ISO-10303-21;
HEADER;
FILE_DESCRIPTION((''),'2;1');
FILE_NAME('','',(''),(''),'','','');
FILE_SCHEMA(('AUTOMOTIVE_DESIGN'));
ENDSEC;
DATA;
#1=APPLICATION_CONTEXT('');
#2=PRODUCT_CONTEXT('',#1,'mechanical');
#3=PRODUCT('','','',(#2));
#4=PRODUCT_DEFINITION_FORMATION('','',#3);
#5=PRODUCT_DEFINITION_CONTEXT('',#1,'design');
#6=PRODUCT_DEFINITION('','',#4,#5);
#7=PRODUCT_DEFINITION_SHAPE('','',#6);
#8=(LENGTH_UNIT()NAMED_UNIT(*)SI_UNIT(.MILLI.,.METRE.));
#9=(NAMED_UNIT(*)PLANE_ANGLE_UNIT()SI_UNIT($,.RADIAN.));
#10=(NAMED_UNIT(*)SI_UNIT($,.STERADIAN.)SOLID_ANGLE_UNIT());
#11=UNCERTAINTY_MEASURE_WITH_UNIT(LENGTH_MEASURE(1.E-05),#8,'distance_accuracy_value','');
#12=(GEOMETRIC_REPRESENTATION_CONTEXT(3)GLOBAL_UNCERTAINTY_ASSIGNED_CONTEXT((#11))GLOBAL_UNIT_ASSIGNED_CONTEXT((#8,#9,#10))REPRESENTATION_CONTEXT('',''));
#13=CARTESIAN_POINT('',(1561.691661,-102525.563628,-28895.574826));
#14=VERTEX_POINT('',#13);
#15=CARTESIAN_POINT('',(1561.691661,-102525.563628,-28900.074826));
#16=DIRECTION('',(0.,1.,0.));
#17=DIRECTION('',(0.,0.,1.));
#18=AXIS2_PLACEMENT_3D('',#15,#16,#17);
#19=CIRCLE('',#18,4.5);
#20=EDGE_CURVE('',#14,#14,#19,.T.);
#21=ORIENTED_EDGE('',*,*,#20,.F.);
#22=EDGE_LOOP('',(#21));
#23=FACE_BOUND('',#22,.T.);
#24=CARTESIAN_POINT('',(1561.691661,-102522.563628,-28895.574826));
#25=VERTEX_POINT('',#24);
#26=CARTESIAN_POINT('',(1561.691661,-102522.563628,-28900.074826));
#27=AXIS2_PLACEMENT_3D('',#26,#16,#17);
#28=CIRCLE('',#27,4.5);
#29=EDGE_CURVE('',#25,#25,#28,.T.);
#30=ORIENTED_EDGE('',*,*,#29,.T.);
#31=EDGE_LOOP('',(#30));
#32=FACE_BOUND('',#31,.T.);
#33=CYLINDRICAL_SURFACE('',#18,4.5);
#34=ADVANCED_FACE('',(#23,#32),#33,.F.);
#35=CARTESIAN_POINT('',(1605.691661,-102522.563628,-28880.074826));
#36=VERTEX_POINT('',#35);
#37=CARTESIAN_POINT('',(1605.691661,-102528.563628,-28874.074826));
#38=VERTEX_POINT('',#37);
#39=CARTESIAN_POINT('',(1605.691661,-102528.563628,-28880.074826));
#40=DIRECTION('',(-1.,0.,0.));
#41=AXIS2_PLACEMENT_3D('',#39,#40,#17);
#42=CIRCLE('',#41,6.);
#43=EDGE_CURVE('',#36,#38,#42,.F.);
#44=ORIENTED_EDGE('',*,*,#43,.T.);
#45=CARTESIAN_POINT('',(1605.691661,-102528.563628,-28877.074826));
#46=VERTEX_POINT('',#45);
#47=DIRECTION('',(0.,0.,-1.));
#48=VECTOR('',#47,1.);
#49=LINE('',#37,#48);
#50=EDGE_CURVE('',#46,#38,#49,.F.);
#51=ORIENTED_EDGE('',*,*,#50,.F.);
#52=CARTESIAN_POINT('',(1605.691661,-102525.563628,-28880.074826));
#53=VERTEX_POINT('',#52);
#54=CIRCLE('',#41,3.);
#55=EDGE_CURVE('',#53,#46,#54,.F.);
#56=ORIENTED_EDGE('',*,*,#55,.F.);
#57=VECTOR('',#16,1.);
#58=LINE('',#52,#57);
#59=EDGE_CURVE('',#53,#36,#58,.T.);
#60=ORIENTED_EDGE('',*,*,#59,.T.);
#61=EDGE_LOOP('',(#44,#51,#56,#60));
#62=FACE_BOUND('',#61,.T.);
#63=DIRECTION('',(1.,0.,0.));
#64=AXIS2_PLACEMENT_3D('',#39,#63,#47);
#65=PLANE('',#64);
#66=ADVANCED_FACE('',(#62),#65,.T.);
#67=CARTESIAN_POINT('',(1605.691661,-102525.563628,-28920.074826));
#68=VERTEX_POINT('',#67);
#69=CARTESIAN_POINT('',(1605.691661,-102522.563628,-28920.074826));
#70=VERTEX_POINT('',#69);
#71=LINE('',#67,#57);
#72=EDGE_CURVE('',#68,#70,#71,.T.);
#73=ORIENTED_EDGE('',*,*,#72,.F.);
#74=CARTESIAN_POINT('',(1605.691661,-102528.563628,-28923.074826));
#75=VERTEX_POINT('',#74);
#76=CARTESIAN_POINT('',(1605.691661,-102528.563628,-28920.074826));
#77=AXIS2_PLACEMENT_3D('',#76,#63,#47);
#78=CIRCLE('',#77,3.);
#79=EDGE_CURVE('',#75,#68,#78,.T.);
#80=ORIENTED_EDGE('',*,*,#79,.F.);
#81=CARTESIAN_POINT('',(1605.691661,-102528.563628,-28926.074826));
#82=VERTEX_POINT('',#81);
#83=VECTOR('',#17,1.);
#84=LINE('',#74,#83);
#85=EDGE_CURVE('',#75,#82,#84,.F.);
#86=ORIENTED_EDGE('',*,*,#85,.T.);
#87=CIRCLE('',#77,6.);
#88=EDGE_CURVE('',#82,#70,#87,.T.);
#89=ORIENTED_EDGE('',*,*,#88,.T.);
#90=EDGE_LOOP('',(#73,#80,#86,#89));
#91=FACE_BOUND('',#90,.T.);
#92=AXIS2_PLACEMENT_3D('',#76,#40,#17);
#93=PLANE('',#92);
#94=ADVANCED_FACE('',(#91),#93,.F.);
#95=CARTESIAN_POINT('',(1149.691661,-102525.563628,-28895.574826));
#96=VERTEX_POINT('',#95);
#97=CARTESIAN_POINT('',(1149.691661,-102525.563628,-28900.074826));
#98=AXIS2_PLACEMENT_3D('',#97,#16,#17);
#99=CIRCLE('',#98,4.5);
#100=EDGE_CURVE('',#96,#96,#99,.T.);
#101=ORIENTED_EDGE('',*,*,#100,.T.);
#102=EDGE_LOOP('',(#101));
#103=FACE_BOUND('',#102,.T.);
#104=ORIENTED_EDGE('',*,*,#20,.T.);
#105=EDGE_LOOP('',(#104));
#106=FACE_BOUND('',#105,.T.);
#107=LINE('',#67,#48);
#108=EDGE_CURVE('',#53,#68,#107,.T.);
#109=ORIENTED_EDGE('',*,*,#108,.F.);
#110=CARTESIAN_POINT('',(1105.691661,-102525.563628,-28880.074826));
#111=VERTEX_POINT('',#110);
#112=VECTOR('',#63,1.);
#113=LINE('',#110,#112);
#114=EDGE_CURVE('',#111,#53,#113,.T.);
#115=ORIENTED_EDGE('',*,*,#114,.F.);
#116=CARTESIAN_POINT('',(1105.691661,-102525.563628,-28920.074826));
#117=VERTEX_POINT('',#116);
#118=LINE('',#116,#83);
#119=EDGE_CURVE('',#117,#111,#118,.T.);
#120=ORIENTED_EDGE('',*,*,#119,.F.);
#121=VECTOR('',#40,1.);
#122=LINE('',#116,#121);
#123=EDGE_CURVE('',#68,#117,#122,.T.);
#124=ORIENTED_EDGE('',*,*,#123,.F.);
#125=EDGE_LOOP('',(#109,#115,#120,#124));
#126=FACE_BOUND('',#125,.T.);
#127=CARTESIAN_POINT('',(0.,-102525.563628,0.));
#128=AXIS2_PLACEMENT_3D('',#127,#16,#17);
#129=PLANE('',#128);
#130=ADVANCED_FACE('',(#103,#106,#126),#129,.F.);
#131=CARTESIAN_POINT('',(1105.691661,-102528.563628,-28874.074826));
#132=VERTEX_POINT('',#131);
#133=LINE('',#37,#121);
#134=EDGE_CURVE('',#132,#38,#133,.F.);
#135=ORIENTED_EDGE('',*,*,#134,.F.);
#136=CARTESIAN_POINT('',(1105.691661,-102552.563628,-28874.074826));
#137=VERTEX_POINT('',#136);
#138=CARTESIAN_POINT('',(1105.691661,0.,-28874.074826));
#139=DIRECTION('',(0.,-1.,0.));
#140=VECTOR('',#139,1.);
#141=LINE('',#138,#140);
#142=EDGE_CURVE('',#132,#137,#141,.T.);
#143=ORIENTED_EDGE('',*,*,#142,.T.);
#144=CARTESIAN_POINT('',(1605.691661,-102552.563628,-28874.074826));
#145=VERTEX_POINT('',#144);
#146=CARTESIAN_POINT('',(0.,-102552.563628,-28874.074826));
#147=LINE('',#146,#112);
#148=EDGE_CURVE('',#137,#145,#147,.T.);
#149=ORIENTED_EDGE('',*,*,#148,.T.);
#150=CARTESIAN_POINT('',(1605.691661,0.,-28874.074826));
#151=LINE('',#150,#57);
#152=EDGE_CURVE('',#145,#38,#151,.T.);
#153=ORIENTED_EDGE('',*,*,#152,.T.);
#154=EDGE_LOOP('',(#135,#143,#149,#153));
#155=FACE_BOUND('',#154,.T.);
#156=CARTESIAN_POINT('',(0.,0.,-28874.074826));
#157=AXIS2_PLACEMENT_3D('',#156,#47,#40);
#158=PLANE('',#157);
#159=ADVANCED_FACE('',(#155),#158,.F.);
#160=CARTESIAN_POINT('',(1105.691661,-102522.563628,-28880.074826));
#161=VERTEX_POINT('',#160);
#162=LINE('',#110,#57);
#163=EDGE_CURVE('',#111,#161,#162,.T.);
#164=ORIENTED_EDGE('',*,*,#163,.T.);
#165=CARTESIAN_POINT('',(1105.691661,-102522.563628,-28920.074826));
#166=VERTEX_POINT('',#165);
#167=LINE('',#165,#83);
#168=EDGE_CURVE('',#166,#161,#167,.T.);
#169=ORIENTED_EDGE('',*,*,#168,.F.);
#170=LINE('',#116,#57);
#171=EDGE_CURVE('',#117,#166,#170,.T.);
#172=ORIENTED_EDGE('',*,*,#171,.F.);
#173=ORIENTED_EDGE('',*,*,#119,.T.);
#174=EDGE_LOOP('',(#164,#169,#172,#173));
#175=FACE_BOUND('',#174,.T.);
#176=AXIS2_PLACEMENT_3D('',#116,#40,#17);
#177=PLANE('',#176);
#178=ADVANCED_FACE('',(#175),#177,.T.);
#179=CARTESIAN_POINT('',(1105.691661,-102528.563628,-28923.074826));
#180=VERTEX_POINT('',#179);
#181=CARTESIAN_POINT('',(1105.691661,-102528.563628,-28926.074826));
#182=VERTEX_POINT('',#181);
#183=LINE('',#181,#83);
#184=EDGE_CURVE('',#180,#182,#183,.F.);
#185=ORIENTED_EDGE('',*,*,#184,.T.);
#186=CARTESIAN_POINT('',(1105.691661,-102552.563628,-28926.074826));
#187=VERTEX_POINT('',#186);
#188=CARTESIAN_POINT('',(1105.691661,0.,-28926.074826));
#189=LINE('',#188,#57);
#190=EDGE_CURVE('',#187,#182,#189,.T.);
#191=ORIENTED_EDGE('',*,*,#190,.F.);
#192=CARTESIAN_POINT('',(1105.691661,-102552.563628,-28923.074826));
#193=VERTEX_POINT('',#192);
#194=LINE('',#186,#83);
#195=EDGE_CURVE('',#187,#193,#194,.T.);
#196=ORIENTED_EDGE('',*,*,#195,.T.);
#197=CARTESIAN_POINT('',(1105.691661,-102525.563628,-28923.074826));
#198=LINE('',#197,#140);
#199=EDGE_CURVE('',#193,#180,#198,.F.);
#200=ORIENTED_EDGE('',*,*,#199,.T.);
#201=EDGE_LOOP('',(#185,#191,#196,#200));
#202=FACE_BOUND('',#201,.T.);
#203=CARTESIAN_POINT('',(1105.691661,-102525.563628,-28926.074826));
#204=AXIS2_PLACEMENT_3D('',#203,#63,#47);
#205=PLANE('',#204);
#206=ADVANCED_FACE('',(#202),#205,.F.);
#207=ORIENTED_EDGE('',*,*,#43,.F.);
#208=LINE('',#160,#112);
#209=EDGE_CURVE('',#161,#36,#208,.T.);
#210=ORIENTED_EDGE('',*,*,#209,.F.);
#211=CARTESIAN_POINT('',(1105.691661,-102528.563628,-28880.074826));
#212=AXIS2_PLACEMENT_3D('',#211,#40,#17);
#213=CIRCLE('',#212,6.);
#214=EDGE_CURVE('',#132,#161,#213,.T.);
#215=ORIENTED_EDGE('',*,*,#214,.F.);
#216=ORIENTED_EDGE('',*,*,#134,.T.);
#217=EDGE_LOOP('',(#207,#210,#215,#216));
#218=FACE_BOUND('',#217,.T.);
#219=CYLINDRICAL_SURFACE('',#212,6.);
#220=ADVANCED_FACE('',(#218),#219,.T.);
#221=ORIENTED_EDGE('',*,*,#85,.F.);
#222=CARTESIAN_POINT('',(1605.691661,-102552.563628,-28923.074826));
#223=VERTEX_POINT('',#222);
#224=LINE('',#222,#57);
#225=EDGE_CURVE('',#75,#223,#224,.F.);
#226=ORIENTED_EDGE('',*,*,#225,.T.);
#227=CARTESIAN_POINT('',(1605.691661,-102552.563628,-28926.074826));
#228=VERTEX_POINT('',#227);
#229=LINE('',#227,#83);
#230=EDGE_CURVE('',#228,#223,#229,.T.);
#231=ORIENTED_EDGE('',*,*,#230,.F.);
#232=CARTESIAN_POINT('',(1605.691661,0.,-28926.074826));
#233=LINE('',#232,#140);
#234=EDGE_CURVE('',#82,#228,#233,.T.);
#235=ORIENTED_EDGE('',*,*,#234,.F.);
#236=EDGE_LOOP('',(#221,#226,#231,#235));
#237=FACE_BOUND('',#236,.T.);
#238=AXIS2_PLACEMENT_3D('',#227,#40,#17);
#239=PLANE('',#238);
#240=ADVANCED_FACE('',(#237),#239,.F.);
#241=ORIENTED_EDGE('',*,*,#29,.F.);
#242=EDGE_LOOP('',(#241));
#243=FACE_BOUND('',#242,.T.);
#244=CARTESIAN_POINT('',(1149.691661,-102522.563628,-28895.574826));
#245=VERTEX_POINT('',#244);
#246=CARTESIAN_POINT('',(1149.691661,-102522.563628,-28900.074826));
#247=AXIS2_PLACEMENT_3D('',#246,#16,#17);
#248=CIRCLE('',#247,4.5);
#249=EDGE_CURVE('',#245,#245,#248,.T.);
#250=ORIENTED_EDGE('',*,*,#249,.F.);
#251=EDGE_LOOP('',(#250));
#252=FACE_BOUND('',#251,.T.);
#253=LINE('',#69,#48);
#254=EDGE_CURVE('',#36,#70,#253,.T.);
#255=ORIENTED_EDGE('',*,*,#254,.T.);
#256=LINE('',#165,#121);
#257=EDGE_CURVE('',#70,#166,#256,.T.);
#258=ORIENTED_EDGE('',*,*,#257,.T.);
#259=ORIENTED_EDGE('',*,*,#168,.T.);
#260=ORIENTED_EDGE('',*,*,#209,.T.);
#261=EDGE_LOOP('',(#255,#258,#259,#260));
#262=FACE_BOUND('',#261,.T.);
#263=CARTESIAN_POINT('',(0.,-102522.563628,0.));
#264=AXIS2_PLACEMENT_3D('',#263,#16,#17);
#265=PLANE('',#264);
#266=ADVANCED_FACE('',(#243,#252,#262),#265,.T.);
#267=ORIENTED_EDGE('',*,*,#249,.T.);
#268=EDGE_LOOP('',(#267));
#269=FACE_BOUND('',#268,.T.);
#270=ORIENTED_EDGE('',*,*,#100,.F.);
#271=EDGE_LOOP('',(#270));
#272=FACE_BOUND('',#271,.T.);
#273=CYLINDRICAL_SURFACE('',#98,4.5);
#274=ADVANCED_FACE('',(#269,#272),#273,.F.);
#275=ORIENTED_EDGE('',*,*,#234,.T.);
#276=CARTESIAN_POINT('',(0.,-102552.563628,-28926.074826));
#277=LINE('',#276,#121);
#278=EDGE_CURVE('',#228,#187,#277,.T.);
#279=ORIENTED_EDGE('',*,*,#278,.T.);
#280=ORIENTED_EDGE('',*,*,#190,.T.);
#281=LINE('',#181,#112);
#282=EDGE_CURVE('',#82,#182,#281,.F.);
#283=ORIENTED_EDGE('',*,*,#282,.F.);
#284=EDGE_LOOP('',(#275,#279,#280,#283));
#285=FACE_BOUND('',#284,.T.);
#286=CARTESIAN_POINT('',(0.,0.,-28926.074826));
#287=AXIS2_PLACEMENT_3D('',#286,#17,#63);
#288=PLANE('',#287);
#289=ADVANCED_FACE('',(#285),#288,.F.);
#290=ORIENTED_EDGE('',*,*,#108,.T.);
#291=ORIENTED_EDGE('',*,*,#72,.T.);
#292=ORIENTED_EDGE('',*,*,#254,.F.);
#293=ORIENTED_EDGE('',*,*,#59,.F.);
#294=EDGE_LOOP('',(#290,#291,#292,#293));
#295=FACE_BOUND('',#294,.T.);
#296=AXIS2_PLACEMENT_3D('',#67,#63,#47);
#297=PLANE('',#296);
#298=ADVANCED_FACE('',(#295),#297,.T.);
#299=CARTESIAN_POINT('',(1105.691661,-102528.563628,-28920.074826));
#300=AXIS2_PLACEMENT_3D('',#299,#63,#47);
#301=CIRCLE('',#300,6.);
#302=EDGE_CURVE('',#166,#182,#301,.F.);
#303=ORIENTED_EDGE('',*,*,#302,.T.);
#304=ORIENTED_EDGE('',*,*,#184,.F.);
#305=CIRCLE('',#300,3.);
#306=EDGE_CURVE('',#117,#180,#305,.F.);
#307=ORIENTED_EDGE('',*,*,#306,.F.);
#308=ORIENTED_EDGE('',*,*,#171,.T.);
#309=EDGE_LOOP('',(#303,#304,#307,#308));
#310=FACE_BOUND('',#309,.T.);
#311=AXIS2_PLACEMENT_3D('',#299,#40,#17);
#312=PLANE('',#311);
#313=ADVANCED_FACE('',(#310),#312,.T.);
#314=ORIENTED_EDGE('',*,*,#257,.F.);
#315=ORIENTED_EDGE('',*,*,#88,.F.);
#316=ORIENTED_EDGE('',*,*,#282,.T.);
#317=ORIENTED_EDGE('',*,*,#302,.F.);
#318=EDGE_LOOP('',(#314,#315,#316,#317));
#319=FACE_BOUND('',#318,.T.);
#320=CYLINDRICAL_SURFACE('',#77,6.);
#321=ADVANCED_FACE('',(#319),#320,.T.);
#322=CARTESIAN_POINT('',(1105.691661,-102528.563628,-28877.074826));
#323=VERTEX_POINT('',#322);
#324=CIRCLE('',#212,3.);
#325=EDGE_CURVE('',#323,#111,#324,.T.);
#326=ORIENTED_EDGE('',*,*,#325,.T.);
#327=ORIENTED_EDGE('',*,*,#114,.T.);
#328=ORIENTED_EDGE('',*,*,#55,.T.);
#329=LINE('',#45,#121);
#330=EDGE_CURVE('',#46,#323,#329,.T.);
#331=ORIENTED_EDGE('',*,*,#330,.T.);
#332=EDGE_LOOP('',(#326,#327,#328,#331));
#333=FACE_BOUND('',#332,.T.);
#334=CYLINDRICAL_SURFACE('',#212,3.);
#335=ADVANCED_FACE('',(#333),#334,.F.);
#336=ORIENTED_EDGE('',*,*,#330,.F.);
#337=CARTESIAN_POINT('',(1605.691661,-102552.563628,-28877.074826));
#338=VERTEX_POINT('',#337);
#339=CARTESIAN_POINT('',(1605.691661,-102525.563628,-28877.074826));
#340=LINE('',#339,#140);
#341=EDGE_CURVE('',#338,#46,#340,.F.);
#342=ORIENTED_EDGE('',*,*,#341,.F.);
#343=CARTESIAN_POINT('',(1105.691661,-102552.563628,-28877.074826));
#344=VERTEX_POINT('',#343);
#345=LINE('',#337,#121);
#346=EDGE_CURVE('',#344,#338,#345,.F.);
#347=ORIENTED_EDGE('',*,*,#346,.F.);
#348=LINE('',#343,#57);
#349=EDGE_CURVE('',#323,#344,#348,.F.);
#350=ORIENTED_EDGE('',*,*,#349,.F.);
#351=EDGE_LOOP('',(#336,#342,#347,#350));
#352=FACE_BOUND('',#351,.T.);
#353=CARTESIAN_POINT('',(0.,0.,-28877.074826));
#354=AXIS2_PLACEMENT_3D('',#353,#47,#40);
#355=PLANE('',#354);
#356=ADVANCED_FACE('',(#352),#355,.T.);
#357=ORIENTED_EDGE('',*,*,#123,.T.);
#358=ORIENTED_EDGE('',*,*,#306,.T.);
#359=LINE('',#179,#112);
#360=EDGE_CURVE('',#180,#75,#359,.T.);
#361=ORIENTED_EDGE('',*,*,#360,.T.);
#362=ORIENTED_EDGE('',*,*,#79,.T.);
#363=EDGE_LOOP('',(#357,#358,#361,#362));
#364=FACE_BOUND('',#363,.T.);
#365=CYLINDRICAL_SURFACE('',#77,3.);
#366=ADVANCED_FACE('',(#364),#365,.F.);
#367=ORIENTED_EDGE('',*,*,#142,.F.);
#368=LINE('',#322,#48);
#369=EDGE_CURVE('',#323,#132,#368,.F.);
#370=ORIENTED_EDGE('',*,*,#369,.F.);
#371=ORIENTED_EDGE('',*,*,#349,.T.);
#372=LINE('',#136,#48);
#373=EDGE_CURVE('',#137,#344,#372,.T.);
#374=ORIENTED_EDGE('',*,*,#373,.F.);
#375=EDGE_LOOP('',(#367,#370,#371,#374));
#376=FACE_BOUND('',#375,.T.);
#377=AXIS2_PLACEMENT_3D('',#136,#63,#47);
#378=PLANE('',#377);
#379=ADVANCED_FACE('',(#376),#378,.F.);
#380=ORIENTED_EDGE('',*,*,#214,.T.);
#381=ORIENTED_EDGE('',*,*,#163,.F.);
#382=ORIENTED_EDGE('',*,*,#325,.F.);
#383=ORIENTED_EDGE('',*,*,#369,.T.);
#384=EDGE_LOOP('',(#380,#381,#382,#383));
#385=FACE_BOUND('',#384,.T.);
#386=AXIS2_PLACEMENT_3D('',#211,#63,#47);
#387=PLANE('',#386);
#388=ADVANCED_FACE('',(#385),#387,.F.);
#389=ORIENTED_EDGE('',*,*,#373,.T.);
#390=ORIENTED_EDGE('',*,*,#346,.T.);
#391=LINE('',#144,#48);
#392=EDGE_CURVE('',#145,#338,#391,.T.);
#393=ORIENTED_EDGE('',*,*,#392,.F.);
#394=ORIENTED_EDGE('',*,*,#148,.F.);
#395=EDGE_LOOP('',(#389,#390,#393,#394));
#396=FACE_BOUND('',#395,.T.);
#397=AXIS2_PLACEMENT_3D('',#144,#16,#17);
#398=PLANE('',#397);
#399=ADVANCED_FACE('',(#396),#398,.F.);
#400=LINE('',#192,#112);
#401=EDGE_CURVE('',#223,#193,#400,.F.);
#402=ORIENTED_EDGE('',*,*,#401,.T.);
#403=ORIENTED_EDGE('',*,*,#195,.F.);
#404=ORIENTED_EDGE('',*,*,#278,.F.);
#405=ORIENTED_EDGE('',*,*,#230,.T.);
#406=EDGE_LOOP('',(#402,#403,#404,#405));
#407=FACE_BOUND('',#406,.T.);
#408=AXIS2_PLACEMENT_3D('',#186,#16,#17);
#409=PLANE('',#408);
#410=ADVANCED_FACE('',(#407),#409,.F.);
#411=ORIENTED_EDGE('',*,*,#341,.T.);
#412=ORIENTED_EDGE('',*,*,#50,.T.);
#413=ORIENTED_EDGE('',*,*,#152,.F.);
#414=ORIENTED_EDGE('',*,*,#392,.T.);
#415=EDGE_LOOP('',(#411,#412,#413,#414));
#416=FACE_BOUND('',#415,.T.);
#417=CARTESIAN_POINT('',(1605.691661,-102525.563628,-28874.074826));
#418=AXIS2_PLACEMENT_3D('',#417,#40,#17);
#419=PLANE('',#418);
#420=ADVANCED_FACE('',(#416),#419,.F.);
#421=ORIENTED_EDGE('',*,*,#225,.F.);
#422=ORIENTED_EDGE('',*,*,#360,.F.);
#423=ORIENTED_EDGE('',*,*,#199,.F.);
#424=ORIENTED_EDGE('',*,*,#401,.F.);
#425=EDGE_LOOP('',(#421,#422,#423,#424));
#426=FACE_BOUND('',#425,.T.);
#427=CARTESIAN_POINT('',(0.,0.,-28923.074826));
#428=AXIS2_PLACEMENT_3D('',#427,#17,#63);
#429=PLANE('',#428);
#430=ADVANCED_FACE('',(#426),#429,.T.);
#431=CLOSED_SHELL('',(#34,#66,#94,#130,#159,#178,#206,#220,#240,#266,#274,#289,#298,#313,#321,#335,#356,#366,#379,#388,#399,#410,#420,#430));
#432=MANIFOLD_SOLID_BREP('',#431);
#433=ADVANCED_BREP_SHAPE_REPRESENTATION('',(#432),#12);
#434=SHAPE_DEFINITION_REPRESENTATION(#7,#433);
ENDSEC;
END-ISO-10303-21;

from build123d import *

# Parameters (mm, degrees)
SKETCH1_W               = 500
SKETCH1_H               = 40
SKETCH1_R               = 4.5
BASE_FLANGE1_DEPTH      = 3
EDGE_FLANGE1_DEPTH      = 500
EDGE_FLANGE1_BEND_DEPTH = 500


# Sheet-metal steps are written as plain solids
with BuildPart() as part:
    # Sketch1 → Base-Flange1 (new body)
    with BuildSketch(Plane(origin=(1355.32335997, -102522.563627841, -30605.108385113), x_dir=(1, 0, 0), z_dir=(0, 1, 0))):
        with Locations((0.368301387, -1705.033559341)):
            Rectangle(SKETCH1_W, SKETCH1_H)
        with Locations(Location((-205.631698613, -1705.033559341, 0), (0, 0, 270))):
            Circle(SKETCH1_R, mode=Mode.SUBTRACT)
        with Locations(Location((206.368301387, -1705.033559341, 0), (0, 0, 270))):
            Circle(SKETCH1_R, mode=Mode.SUBTRACT)
    extrude(amount=-BASE_FLANGE1_DEPTH)

    # Edge-Flange1 section (across the edge) → Edge-Flange1 (add)
    with BuildSketch(Plane(origin=(1605.691661356, -102525.563627841, -28877.074825771), x_dir=(0, 0, -1), z_dir=(-1, 0, 0))):
        with BuildLine():
            Line((-3, 3), (-3, 27))
            Line((-3, 27), (0, 27))
            Line((0, 27), (0, 3))
            ThreePointArc((0, 3), (0.878679656, 0.878679656), (3, 0))
            Line((3, 0), (3, -3))
            ThreePointArc((3, -3), (-1.242640687, -1.242640687), (-3, 3))
        make_face()
    extrude(amount=EDGE_FLANGE1_DEPTH)

    # Edge-Flange1 section 2 (across the edge) → Edge-Flange1 bend (add)
    with BuildSketch(Plane(origin=(1105.691661356, -102525.563627841, -28923.074825771), x_dir=(0, 0, 1), z_dir=(1, 0, 0))):
        with BuildLine():
            Line((-3, 3), (-3, 27))
            Line((-3, 27), (0, 27))
            Line((0, 27), (0, 3))
            ThreePointArc((0, 3), (0.878679656, 0.878679656), (3, 0))
            Line((3, 0), (3, -3))
            ThreePointArc((3, -3), (-1.242640687, -1.242640687), (-3, 3))
        make_face()
    extrude(amount=EDGE_FLANGE1_BEND_DEPTH)


solid = part.part
